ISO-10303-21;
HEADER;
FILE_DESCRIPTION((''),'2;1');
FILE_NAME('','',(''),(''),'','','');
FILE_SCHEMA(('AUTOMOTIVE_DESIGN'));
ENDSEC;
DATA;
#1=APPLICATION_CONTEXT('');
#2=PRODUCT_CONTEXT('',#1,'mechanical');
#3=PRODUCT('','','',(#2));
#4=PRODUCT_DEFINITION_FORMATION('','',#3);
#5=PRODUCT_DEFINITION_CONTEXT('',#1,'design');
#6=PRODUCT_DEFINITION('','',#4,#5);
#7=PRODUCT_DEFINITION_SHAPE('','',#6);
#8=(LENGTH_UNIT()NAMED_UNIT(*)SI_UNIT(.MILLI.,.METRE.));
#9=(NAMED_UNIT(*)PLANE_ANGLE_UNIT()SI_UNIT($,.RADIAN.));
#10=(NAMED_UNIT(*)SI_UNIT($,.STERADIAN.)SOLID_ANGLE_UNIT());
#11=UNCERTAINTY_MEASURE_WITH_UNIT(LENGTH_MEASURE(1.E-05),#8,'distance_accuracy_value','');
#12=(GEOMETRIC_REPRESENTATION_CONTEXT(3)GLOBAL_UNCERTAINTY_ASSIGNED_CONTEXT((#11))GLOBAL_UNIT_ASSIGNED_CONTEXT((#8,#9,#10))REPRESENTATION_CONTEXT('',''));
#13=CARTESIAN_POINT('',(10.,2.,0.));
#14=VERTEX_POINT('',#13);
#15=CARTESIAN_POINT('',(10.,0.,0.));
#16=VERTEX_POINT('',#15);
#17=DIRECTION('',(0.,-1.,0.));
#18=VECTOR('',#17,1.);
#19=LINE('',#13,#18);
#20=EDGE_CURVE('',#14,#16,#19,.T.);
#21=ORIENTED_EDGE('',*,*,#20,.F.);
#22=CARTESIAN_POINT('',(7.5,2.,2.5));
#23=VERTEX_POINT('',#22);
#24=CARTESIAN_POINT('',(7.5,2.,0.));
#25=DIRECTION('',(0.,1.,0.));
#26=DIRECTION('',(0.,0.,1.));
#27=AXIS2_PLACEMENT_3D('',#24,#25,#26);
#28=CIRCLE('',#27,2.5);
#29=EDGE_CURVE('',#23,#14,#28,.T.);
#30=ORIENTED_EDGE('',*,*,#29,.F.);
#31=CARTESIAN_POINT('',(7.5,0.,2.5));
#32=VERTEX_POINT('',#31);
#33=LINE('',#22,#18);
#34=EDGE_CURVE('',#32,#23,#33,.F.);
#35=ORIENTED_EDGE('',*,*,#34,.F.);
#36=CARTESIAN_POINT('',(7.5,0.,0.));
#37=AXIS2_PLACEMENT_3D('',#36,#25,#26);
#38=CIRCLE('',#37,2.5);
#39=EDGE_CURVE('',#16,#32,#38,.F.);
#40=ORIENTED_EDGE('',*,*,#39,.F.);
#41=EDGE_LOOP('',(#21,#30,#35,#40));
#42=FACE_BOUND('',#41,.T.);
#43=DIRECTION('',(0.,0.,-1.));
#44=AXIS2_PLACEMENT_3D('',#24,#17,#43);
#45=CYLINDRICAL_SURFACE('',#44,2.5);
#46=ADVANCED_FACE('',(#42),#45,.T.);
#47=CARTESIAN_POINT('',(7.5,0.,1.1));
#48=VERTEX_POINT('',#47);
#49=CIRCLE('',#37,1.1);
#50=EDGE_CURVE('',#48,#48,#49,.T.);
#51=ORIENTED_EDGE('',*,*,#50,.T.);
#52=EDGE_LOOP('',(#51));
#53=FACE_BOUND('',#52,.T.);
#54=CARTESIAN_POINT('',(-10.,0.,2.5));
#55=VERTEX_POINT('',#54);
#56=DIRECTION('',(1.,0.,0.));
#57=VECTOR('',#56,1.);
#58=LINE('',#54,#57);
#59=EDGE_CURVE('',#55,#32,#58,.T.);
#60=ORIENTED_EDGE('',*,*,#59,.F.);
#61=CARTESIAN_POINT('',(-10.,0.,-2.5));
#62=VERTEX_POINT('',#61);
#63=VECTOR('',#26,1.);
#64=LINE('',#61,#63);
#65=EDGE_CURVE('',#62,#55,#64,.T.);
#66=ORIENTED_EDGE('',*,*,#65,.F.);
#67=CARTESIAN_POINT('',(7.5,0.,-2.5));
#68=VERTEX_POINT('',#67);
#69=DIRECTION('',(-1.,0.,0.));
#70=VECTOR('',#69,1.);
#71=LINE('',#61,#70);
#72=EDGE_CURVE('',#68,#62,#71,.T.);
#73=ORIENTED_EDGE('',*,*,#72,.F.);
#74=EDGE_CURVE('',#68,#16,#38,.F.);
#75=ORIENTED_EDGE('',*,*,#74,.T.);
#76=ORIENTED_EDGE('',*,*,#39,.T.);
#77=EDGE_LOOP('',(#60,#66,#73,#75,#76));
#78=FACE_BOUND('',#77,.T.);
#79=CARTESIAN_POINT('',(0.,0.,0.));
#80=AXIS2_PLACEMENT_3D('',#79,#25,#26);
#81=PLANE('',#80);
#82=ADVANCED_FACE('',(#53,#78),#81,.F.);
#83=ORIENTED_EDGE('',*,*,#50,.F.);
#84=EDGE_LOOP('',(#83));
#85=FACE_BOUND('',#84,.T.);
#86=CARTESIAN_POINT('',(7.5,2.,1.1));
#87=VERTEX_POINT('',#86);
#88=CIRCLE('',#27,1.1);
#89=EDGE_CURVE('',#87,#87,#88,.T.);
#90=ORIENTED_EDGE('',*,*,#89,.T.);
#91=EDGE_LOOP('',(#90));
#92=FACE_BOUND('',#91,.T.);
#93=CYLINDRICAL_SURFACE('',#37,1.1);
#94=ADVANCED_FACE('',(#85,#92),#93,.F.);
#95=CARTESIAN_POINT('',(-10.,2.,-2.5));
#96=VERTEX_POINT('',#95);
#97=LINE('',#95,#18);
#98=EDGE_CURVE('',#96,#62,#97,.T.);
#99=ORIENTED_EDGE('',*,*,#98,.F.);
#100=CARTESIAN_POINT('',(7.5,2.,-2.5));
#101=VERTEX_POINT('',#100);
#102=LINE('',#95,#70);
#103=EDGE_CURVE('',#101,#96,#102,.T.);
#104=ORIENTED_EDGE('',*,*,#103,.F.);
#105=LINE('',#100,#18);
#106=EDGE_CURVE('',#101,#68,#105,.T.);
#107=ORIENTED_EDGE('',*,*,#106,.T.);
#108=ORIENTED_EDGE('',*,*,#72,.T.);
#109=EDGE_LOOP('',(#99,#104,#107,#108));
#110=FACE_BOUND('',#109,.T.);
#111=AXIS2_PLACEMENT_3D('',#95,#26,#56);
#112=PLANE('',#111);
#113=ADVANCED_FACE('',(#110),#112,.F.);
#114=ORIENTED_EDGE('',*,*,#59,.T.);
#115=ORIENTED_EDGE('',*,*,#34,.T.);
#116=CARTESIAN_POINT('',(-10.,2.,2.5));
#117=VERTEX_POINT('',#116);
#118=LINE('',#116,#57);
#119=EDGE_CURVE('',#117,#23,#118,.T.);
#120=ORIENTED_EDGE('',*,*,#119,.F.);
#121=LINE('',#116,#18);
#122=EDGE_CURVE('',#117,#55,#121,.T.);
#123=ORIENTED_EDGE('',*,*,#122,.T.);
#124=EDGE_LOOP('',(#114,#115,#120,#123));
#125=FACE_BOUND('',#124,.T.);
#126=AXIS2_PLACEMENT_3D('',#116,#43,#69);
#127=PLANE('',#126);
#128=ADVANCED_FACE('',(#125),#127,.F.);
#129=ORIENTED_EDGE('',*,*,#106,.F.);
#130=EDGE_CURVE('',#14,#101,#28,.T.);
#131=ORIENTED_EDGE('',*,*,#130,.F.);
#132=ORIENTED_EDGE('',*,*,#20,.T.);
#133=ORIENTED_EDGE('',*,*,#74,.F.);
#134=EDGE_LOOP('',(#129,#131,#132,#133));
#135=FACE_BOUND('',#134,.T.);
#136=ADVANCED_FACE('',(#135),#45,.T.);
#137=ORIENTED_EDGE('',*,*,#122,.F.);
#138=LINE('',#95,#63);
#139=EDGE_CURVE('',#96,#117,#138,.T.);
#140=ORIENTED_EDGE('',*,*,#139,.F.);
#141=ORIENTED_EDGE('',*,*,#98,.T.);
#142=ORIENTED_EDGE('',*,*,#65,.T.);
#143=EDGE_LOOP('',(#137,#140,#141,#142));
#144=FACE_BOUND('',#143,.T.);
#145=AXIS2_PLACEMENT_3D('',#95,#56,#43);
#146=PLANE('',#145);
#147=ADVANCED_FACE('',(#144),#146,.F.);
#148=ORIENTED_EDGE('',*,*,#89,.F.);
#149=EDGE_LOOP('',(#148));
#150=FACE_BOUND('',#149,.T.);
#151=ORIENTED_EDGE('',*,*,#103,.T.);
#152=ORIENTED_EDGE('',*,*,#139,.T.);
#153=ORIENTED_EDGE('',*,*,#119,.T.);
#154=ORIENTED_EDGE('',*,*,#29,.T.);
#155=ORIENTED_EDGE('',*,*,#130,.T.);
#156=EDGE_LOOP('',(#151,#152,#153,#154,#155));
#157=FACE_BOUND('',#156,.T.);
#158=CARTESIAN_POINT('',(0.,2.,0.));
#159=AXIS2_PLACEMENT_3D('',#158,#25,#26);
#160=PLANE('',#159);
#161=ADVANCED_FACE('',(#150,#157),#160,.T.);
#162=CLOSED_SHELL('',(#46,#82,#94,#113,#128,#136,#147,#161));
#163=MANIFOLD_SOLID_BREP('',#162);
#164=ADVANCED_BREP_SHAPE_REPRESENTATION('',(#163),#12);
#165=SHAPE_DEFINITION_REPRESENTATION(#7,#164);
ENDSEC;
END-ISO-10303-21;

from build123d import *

# Parameters (mm, degrees)
SKETCH1_W           = 20
SKETCH1_H           = 5
BOSS_EXTRUDE1_DEPTH = 2
SKETCH2_R           = 1.1
CUT_EXTRUDE1_DEPTH  = 2
FILLET1_R           = 2.5


with BuildPart() as part:
    # Sketch1 → Boss-Extrude1 (new body)
    with BuildSketch(Plane(origin=(0, 0, 0), x_dir=(1, 0, 0), z_dir=(0, 1, 0))):
        Rectangle(SKETCH1_W, SKETCH1_H)
    extrude(amount=BOSS_EXTRUDE1_DEPTH)

    # Sketch2 → Cut-Extrude1 (cut)
    with BuildSketch(Plane(origin=(0, 2, 0), x_dir=(1, 0, 0), z_dir=(0, 1, 0))):
        with Locations(Location((7.5, 0, 0), (0, 0, 270))):
            Circle(SKETCH2_R)
    extrude(amount=-CUT_EXTRUDE1_DEPTH, mode=Mode.SUBTRACT)

    # Fillet1
    fillet1_edges = [part.edges().sort_by_distance(p)[0] for p in [
        (10, 1, 2.5),
        (10, 1, -2.5),
    ]]
    fillet(fillet1_edges, radius=FILLET1_R - 0.0001)  # a hair under: the kernel refuses the full size


solid = part.part
